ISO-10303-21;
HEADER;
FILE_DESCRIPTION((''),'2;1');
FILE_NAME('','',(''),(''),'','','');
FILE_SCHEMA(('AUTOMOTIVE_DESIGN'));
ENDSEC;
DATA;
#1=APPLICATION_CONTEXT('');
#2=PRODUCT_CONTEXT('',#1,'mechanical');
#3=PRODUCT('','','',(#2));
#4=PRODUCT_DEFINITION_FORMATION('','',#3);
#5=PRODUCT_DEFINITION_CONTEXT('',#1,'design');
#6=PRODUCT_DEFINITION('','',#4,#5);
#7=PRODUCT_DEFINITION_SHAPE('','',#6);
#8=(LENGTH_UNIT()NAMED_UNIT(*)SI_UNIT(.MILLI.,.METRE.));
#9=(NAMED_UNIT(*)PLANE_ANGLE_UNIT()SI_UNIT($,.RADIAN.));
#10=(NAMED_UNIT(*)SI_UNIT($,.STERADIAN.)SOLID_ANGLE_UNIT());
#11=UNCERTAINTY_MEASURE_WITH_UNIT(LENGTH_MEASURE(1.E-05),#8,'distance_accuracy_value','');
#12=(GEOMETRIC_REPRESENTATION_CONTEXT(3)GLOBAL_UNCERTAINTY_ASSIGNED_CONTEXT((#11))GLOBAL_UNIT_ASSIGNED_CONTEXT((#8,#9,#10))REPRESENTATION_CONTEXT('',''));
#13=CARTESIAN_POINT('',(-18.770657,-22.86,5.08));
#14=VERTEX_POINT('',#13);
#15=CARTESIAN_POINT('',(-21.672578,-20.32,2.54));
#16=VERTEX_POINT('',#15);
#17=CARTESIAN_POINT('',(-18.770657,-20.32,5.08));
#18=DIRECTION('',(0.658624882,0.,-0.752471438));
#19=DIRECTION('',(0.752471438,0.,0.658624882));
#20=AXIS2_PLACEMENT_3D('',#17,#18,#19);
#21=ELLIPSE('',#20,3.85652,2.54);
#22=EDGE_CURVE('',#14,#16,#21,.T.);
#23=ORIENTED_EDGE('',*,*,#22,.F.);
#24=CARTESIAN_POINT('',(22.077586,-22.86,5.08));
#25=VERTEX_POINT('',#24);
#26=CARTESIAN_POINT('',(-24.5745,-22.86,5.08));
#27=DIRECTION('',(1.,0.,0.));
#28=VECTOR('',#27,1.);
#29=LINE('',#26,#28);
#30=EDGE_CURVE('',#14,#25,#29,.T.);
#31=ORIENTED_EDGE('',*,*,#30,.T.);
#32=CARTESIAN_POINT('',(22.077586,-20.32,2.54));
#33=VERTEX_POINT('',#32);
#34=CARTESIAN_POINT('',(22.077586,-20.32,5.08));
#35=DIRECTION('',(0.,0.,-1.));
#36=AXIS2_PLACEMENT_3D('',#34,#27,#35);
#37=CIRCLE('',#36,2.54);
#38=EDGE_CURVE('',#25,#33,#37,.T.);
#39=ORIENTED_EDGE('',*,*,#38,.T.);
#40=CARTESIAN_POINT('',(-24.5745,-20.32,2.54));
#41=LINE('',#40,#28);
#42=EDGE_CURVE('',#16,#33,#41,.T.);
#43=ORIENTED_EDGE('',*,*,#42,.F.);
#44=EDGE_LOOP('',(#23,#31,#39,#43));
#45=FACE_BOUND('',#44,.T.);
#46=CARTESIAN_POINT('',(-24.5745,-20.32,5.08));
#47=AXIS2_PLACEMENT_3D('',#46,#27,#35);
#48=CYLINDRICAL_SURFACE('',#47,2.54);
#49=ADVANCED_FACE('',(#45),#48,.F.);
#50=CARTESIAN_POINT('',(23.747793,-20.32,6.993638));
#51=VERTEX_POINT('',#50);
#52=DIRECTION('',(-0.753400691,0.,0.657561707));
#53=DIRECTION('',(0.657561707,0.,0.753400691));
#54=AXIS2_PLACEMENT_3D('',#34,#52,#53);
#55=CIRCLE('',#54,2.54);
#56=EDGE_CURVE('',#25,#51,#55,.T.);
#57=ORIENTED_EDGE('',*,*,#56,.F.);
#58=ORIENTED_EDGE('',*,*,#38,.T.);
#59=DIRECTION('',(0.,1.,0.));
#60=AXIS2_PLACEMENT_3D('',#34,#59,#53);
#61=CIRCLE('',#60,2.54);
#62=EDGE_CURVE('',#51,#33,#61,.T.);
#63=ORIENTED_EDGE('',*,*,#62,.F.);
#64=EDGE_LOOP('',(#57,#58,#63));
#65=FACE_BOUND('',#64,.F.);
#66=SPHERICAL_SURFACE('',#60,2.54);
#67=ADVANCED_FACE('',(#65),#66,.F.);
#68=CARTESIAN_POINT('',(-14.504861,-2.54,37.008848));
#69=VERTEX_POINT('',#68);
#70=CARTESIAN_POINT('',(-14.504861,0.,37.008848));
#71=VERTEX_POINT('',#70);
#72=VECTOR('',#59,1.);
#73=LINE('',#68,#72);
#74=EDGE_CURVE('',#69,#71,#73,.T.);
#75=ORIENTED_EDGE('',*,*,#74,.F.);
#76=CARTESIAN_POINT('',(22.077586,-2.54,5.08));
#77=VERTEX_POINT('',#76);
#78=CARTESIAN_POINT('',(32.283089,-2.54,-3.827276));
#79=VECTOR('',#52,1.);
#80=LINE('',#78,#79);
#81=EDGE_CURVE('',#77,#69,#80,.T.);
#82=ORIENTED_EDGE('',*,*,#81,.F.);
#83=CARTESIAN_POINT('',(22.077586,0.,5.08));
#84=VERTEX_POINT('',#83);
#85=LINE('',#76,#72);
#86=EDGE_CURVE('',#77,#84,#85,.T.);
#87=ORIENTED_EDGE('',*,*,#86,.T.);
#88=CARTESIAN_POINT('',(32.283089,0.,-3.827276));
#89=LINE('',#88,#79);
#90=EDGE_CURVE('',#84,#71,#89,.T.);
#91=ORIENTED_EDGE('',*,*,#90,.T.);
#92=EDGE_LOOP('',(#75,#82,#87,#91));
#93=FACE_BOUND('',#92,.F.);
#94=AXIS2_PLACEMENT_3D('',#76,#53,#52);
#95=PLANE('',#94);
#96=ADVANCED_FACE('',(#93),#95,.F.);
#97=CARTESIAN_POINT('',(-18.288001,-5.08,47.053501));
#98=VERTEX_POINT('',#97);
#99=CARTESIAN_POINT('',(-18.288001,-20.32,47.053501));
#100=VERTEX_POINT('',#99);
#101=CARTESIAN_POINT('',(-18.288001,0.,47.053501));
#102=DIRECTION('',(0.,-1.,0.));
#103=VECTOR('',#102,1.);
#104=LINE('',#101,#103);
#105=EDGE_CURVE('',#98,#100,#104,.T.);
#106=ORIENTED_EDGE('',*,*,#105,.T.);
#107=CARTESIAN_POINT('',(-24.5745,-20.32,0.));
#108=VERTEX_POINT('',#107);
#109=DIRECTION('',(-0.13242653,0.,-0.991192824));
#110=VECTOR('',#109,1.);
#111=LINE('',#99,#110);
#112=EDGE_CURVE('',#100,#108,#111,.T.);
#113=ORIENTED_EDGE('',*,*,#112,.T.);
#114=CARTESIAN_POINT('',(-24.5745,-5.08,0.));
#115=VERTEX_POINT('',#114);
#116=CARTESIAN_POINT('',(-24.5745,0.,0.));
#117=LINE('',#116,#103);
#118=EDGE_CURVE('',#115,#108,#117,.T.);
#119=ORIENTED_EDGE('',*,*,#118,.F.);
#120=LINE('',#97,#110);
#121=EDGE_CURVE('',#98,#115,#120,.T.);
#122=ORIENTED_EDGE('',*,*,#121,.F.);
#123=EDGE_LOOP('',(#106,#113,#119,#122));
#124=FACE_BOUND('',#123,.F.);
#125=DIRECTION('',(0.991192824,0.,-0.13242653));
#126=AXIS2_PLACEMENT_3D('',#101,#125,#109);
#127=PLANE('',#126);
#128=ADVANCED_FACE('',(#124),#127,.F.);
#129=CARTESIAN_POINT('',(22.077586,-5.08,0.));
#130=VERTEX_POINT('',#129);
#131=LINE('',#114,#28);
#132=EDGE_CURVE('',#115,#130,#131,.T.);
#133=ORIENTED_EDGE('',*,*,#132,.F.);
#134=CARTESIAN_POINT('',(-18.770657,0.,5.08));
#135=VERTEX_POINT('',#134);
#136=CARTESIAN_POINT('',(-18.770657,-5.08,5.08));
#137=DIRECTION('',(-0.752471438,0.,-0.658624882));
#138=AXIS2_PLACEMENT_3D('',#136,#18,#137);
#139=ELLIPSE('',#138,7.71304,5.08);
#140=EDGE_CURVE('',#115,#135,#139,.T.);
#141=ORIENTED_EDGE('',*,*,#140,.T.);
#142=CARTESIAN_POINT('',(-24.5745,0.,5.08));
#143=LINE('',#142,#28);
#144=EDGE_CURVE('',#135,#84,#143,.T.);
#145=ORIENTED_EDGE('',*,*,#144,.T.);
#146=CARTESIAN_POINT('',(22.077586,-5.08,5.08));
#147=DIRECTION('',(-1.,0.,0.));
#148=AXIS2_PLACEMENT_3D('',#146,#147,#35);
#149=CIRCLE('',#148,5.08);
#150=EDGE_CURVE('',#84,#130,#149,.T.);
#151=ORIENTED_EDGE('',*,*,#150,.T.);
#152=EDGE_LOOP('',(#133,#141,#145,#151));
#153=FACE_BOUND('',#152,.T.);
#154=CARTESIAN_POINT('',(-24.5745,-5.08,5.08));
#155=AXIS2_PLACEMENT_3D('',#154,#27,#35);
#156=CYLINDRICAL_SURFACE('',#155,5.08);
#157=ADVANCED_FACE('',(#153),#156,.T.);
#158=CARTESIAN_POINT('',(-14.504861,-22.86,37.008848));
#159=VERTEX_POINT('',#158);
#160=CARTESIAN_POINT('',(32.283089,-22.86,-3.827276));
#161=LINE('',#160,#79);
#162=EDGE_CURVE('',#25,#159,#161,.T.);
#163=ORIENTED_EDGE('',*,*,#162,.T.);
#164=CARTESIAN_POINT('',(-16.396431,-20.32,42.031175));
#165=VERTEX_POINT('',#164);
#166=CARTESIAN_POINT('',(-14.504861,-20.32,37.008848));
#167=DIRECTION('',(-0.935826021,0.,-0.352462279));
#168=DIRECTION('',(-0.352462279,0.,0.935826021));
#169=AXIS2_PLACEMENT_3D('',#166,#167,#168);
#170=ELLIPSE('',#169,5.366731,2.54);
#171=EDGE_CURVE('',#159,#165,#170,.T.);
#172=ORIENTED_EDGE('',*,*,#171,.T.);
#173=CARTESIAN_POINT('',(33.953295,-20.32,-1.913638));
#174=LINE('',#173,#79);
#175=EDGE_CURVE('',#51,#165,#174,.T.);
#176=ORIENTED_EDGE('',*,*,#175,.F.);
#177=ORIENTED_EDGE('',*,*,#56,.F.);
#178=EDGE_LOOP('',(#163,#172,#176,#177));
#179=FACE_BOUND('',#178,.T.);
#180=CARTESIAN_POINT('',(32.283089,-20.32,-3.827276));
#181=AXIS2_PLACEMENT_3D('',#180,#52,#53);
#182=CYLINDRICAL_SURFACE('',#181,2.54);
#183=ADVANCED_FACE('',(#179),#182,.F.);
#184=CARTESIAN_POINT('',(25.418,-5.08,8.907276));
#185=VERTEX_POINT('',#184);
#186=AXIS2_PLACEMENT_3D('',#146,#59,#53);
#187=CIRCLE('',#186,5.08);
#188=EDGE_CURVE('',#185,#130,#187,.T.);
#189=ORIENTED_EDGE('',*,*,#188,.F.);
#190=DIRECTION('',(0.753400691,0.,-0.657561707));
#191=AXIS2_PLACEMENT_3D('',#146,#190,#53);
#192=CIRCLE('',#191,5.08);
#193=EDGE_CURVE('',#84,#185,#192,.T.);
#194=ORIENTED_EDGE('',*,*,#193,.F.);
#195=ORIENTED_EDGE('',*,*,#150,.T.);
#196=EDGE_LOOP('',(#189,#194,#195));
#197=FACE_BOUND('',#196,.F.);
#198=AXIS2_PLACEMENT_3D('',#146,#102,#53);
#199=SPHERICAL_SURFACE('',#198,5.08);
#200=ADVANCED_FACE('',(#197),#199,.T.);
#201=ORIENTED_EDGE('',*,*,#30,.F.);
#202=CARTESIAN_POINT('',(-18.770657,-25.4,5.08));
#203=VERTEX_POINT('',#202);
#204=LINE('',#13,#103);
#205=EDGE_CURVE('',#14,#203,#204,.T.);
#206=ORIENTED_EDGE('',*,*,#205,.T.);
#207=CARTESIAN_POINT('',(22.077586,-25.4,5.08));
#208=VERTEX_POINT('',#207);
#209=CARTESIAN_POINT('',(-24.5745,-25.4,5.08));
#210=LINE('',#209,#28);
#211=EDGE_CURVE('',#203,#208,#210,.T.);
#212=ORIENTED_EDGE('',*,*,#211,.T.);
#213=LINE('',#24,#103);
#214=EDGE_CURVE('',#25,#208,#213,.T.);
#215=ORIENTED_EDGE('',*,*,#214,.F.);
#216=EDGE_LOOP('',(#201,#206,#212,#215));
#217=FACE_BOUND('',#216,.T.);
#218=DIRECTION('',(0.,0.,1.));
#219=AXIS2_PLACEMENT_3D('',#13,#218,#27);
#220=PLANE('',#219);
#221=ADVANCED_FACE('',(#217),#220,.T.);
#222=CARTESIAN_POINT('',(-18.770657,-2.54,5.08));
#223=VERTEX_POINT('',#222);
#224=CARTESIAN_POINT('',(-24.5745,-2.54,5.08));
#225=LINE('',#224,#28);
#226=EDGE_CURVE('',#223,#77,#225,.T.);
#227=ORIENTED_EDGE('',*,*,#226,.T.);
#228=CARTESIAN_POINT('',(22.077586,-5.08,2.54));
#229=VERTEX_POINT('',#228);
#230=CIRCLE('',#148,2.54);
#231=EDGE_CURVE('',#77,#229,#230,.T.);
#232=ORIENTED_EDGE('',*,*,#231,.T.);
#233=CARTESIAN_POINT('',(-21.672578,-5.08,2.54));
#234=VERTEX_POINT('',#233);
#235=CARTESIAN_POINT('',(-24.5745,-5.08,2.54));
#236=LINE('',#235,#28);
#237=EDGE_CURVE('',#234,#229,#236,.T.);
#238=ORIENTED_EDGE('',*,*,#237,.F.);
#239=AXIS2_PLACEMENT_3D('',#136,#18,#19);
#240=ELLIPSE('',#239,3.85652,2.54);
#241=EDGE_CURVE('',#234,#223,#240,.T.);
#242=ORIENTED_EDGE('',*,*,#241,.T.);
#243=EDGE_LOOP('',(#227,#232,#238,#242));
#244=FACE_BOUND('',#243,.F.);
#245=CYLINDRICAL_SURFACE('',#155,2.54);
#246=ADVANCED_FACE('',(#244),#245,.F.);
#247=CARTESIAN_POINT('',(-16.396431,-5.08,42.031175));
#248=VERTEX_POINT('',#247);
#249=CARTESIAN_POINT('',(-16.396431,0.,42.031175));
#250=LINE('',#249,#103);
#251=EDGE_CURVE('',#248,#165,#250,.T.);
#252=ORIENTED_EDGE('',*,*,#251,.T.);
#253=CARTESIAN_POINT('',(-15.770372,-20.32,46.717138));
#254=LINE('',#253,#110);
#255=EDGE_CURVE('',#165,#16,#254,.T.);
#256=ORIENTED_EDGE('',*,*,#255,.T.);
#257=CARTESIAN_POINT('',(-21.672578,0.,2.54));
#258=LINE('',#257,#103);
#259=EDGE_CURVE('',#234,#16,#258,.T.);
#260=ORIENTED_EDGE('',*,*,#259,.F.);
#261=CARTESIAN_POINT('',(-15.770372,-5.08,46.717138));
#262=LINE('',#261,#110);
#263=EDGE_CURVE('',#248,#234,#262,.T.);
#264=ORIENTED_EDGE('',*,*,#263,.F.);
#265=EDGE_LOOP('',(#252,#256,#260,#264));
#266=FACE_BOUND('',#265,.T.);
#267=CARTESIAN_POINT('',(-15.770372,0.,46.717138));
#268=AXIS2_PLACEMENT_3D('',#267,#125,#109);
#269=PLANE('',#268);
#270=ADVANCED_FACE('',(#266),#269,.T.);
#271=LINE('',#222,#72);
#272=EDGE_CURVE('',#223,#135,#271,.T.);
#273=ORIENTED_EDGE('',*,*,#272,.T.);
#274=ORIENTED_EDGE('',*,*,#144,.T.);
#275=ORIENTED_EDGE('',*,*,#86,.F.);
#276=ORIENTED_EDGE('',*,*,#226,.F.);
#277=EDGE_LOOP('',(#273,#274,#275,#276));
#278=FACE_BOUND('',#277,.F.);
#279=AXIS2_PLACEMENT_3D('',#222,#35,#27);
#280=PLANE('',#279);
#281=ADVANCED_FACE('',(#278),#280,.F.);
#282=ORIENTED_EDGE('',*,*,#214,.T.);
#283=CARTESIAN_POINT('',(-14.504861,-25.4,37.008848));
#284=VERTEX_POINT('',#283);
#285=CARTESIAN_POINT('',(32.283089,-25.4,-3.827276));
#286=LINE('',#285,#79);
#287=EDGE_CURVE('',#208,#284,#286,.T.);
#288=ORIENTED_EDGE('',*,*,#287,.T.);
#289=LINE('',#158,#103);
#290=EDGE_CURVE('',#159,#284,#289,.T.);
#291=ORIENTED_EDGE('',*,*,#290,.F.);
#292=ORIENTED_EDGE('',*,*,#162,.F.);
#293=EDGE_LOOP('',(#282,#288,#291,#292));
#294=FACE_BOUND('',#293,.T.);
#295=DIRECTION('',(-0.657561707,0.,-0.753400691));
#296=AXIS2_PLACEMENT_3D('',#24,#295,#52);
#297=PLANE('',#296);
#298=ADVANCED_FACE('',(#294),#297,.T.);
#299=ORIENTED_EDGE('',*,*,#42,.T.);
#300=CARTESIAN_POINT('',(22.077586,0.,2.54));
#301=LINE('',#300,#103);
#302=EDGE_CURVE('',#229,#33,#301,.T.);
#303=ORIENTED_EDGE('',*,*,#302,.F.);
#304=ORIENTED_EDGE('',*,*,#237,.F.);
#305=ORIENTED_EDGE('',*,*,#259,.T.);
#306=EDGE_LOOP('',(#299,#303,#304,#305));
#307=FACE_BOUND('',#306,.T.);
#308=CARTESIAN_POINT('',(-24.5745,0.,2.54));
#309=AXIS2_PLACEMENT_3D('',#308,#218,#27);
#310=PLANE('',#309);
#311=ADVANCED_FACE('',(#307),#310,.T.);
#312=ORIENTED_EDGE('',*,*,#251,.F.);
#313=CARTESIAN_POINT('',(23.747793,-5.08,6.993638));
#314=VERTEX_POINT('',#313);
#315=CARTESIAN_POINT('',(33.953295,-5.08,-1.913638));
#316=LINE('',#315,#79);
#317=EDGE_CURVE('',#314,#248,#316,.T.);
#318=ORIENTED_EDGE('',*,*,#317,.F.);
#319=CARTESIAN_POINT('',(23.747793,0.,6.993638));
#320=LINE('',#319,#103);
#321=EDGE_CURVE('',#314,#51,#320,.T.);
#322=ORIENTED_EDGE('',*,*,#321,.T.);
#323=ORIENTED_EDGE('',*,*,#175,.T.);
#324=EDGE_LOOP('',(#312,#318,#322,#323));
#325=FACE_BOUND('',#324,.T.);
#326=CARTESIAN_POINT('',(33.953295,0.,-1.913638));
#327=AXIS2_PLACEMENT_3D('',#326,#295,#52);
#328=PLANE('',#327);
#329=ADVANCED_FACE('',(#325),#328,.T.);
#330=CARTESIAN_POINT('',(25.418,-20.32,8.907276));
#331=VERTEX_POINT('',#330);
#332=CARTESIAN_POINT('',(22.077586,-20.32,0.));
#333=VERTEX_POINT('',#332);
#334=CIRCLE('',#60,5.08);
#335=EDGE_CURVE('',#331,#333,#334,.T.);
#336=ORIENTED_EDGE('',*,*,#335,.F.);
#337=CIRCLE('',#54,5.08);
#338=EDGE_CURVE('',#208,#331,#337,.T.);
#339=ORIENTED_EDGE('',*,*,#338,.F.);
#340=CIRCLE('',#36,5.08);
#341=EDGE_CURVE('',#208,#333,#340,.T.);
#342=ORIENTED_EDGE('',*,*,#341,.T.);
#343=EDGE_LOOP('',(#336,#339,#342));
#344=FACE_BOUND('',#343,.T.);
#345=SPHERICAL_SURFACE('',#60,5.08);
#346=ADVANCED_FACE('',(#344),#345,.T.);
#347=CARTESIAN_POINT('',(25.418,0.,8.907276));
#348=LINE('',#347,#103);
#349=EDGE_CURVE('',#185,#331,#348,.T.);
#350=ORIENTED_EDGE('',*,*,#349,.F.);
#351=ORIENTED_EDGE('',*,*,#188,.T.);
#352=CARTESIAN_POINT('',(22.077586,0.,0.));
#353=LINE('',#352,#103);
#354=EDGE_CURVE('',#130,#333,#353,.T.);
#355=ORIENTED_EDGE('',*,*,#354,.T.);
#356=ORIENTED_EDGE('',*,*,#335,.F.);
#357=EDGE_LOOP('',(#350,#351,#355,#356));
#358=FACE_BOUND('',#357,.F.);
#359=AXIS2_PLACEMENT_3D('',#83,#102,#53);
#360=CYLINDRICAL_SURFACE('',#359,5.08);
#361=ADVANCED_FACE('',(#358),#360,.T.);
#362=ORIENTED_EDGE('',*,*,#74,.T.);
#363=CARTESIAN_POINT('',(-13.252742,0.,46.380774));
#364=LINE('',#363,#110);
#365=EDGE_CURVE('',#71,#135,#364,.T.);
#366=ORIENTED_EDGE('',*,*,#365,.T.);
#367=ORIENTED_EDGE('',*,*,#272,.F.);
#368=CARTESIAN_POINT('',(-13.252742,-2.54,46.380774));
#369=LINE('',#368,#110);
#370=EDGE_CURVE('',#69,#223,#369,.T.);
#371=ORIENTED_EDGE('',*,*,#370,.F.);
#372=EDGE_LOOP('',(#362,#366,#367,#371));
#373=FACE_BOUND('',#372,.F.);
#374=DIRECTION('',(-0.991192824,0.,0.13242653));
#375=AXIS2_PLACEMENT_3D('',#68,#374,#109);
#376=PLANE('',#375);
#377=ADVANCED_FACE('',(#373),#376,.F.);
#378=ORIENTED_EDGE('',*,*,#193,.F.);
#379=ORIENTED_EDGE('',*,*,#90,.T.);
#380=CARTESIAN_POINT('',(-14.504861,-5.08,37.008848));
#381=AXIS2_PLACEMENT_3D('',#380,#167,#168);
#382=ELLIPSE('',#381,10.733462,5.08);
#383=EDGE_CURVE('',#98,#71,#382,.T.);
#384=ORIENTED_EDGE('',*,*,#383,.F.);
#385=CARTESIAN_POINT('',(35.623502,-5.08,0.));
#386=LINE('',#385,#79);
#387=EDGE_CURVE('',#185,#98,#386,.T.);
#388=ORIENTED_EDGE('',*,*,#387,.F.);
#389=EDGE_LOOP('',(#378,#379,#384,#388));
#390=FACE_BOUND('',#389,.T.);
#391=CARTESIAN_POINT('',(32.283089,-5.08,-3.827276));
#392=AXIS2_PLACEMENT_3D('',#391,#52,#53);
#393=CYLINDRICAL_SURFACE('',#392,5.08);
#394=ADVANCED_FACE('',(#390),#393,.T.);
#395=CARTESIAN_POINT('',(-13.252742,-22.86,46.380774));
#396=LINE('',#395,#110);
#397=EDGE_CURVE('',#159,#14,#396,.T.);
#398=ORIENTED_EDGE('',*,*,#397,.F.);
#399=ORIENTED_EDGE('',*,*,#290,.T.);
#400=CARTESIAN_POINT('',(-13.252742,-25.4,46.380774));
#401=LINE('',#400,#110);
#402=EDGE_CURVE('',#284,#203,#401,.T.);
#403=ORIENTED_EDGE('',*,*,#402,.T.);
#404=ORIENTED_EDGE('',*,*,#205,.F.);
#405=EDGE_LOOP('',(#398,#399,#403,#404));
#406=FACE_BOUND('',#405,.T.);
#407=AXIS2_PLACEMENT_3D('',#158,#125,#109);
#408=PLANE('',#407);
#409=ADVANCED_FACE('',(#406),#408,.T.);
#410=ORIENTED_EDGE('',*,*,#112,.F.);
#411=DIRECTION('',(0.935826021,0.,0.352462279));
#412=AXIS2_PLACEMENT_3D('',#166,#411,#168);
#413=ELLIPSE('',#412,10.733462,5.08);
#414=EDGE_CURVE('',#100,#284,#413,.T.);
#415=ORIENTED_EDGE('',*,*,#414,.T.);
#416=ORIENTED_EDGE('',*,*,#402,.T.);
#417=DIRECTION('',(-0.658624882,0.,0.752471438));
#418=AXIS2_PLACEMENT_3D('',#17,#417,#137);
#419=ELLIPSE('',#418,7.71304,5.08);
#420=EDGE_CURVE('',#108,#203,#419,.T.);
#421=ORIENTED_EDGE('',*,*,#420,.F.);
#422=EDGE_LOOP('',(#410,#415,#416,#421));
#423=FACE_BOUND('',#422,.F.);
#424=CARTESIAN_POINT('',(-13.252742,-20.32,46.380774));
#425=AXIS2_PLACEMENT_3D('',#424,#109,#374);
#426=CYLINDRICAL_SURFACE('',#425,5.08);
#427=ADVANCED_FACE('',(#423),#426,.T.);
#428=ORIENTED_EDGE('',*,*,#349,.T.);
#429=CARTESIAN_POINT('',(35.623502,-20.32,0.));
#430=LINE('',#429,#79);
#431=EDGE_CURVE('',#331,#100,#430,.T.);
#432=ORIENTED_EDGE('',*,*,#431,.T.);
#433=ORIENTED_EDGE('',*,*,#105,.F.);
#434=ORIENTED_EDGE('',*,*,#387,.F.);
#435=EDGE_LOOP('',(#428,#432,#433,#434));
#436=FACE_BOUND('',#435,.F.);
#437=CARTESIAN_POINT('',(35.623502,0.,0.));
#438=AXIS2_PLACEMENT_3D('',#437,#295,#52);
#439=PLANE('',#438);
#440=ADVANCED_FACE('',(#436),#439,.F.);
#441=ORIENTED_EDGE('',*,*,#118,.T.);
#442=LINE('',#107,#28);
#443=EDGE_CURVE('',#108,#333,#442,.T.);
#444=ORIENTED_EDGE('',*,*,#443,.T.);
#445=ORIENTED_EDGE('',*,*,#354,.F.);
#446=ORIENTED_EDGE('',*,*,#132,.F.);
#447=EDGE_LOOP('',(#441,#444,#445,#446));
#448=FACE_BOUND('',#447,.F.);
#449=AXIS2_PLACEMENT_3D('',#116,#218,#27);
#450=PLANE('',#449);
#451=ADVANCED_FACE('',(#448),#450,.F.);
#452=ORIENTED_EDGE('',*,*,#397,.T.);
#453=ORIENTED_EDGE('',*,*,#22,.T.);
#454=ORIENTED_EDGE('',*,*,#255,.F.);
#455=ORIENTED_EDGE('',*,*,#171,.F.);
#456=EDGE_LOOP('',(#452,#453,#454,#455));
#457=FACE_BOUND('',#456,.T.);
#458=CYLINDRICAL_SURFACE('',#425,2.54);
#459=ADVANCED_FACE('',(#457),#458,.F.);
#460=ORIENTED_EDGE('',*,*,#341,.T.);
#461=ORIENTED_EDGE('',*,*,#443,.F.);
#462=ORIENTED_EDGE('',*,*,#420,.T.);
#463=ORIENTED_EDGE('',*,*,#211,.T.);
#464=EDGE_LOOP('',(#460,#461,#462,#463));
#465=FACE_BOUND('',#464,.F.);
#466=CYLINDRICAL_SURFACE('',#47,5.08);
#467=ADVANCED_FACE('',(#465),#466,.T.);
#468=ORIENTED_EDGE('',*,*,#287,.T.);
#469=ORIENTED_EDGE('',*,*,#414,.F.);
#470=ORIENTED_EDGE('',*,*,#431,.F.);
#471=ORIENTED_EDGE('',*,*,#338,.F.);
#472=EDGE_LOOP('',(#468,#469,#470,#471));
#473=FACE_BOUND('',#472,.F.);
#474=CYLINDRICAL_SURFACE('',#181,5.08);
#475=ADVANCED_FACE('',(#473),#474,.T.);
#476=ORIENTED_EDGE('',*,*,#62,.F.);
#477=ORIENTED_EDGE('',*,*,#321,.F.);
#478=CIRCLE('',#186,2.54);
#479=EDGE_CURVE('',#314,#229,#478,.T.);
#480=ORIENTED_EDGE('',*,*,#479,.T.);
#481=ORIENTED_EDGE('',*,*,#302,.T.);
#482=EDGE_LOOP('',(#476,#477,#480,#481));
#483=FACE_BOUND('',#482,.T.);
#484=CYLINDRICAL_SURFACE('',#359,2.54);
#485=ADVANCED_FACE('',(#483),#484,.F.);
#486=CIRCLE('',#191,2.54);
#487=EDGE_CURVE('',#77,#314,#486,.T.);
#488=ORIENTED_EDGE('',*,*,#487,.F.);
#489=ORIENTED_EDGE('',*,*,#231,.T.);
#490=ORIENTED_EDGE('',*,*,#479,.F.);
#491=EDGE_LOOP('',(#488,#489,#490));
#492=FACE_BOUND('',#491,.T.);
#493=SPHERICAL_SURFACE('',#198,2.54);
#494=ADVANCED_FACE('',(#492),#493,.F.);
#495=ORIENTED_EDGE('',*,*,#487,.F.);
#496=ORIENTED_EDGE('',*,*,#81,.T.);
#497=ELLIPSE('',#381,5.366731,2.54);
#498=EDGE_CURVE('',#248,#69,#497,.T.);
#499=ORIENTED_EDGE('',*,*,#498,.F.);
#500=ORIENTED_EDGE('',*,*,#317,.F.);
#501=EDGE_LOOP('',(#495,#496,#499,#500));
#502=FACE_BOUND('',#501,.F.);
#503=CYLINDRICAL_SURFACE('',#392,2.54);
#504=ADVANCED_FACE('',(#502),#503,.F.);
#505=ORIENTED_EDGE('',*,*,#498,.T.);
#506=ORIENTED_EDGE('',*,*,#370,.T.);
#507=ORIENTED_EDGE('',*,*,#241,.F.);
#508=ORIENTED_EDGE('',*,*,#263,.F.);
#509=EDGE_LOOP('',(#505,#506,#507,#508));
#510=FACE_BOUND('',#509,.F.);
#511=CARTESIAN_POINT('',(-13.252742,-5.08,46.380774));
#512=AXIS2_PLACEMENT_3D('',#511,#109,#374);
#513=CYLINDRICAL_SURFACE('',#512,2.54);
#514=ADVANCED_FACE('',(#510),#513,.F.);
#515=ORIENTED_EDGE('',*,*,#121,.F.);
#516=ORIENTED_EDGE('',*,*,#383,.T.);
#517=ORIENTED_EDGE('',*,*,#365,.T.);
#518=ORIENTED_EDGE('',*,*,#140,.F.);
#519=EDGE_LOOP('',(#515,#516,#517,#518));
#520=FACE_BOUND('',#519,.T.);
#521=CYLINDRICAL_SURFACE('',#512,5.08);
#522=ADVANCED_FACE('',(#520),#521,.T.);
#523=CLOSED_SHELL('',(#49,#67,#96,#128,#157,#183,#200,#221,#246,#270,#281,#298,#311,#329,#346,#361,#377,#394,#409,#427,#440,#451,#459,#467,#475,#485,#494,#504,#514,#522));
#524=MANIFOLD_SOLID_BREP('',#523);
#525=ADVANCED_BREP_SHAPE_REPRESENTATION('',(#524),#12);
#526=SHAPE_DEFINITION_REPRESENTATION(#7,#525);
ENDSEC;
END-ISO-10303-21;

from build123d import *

# Parameters (mm, degrees)
F1_DEPTH = 25.4
F2_R     = 5.08
F3_T     = -2.54


# Not quite as in the source:
# - a shell that OpenCascade refuses in one call is made with other operations: the cavity is built on its own and cut out


with BuildPart() as f1:
    # F0 (on Front) → F1 (new body)
    with BuildSketch(Plane.XZ):
        Polygon((35.6235019863, 0), (-18.2880014181, 47.0535010099), (-24.5744995773, 0), align=None)
    extrude(amount=F1_DEPTH)

    # F2
    f2_edges = [f1.edges().sort_by_distance(p)[0] for p in [
        (8.66775, -25.4, 23.526751),
        (-21.43125, -25.4, 23.526751),
        (5.524501, -25.4, 0),
        (35.623502, -12.7, 0),
        (8.66775, 0, 23.526751),
        (-21.43125, 0, 23.526751),
        (5.524501, 0, 0),
    ]]
    fillet(f2_edges, radius=F2_R)

    # F3: a shell. OpenCascade refuses it in one call, so the cavity is built on its own and cut out:
    # the body offset inwards by the wall thickness, plus a prism from it out through each open face.
    f3_core = offset(f1.part, amount=F3_T, mode=Mode.PRIVATE)
    f3_exits = [f3_core.faces().sort_by_distance(p)[0] for p in [
        (-3.732644, -2.54, 15.722949),
        (-3.732644, -22.86, 15.722949),
    ]]
    add(f3_core, mode=Mode.SUBTRACT)
    extrude(f3_exits, amount=-F3_T, mode=Mode.SUBTRACT)


solid = f1.part
